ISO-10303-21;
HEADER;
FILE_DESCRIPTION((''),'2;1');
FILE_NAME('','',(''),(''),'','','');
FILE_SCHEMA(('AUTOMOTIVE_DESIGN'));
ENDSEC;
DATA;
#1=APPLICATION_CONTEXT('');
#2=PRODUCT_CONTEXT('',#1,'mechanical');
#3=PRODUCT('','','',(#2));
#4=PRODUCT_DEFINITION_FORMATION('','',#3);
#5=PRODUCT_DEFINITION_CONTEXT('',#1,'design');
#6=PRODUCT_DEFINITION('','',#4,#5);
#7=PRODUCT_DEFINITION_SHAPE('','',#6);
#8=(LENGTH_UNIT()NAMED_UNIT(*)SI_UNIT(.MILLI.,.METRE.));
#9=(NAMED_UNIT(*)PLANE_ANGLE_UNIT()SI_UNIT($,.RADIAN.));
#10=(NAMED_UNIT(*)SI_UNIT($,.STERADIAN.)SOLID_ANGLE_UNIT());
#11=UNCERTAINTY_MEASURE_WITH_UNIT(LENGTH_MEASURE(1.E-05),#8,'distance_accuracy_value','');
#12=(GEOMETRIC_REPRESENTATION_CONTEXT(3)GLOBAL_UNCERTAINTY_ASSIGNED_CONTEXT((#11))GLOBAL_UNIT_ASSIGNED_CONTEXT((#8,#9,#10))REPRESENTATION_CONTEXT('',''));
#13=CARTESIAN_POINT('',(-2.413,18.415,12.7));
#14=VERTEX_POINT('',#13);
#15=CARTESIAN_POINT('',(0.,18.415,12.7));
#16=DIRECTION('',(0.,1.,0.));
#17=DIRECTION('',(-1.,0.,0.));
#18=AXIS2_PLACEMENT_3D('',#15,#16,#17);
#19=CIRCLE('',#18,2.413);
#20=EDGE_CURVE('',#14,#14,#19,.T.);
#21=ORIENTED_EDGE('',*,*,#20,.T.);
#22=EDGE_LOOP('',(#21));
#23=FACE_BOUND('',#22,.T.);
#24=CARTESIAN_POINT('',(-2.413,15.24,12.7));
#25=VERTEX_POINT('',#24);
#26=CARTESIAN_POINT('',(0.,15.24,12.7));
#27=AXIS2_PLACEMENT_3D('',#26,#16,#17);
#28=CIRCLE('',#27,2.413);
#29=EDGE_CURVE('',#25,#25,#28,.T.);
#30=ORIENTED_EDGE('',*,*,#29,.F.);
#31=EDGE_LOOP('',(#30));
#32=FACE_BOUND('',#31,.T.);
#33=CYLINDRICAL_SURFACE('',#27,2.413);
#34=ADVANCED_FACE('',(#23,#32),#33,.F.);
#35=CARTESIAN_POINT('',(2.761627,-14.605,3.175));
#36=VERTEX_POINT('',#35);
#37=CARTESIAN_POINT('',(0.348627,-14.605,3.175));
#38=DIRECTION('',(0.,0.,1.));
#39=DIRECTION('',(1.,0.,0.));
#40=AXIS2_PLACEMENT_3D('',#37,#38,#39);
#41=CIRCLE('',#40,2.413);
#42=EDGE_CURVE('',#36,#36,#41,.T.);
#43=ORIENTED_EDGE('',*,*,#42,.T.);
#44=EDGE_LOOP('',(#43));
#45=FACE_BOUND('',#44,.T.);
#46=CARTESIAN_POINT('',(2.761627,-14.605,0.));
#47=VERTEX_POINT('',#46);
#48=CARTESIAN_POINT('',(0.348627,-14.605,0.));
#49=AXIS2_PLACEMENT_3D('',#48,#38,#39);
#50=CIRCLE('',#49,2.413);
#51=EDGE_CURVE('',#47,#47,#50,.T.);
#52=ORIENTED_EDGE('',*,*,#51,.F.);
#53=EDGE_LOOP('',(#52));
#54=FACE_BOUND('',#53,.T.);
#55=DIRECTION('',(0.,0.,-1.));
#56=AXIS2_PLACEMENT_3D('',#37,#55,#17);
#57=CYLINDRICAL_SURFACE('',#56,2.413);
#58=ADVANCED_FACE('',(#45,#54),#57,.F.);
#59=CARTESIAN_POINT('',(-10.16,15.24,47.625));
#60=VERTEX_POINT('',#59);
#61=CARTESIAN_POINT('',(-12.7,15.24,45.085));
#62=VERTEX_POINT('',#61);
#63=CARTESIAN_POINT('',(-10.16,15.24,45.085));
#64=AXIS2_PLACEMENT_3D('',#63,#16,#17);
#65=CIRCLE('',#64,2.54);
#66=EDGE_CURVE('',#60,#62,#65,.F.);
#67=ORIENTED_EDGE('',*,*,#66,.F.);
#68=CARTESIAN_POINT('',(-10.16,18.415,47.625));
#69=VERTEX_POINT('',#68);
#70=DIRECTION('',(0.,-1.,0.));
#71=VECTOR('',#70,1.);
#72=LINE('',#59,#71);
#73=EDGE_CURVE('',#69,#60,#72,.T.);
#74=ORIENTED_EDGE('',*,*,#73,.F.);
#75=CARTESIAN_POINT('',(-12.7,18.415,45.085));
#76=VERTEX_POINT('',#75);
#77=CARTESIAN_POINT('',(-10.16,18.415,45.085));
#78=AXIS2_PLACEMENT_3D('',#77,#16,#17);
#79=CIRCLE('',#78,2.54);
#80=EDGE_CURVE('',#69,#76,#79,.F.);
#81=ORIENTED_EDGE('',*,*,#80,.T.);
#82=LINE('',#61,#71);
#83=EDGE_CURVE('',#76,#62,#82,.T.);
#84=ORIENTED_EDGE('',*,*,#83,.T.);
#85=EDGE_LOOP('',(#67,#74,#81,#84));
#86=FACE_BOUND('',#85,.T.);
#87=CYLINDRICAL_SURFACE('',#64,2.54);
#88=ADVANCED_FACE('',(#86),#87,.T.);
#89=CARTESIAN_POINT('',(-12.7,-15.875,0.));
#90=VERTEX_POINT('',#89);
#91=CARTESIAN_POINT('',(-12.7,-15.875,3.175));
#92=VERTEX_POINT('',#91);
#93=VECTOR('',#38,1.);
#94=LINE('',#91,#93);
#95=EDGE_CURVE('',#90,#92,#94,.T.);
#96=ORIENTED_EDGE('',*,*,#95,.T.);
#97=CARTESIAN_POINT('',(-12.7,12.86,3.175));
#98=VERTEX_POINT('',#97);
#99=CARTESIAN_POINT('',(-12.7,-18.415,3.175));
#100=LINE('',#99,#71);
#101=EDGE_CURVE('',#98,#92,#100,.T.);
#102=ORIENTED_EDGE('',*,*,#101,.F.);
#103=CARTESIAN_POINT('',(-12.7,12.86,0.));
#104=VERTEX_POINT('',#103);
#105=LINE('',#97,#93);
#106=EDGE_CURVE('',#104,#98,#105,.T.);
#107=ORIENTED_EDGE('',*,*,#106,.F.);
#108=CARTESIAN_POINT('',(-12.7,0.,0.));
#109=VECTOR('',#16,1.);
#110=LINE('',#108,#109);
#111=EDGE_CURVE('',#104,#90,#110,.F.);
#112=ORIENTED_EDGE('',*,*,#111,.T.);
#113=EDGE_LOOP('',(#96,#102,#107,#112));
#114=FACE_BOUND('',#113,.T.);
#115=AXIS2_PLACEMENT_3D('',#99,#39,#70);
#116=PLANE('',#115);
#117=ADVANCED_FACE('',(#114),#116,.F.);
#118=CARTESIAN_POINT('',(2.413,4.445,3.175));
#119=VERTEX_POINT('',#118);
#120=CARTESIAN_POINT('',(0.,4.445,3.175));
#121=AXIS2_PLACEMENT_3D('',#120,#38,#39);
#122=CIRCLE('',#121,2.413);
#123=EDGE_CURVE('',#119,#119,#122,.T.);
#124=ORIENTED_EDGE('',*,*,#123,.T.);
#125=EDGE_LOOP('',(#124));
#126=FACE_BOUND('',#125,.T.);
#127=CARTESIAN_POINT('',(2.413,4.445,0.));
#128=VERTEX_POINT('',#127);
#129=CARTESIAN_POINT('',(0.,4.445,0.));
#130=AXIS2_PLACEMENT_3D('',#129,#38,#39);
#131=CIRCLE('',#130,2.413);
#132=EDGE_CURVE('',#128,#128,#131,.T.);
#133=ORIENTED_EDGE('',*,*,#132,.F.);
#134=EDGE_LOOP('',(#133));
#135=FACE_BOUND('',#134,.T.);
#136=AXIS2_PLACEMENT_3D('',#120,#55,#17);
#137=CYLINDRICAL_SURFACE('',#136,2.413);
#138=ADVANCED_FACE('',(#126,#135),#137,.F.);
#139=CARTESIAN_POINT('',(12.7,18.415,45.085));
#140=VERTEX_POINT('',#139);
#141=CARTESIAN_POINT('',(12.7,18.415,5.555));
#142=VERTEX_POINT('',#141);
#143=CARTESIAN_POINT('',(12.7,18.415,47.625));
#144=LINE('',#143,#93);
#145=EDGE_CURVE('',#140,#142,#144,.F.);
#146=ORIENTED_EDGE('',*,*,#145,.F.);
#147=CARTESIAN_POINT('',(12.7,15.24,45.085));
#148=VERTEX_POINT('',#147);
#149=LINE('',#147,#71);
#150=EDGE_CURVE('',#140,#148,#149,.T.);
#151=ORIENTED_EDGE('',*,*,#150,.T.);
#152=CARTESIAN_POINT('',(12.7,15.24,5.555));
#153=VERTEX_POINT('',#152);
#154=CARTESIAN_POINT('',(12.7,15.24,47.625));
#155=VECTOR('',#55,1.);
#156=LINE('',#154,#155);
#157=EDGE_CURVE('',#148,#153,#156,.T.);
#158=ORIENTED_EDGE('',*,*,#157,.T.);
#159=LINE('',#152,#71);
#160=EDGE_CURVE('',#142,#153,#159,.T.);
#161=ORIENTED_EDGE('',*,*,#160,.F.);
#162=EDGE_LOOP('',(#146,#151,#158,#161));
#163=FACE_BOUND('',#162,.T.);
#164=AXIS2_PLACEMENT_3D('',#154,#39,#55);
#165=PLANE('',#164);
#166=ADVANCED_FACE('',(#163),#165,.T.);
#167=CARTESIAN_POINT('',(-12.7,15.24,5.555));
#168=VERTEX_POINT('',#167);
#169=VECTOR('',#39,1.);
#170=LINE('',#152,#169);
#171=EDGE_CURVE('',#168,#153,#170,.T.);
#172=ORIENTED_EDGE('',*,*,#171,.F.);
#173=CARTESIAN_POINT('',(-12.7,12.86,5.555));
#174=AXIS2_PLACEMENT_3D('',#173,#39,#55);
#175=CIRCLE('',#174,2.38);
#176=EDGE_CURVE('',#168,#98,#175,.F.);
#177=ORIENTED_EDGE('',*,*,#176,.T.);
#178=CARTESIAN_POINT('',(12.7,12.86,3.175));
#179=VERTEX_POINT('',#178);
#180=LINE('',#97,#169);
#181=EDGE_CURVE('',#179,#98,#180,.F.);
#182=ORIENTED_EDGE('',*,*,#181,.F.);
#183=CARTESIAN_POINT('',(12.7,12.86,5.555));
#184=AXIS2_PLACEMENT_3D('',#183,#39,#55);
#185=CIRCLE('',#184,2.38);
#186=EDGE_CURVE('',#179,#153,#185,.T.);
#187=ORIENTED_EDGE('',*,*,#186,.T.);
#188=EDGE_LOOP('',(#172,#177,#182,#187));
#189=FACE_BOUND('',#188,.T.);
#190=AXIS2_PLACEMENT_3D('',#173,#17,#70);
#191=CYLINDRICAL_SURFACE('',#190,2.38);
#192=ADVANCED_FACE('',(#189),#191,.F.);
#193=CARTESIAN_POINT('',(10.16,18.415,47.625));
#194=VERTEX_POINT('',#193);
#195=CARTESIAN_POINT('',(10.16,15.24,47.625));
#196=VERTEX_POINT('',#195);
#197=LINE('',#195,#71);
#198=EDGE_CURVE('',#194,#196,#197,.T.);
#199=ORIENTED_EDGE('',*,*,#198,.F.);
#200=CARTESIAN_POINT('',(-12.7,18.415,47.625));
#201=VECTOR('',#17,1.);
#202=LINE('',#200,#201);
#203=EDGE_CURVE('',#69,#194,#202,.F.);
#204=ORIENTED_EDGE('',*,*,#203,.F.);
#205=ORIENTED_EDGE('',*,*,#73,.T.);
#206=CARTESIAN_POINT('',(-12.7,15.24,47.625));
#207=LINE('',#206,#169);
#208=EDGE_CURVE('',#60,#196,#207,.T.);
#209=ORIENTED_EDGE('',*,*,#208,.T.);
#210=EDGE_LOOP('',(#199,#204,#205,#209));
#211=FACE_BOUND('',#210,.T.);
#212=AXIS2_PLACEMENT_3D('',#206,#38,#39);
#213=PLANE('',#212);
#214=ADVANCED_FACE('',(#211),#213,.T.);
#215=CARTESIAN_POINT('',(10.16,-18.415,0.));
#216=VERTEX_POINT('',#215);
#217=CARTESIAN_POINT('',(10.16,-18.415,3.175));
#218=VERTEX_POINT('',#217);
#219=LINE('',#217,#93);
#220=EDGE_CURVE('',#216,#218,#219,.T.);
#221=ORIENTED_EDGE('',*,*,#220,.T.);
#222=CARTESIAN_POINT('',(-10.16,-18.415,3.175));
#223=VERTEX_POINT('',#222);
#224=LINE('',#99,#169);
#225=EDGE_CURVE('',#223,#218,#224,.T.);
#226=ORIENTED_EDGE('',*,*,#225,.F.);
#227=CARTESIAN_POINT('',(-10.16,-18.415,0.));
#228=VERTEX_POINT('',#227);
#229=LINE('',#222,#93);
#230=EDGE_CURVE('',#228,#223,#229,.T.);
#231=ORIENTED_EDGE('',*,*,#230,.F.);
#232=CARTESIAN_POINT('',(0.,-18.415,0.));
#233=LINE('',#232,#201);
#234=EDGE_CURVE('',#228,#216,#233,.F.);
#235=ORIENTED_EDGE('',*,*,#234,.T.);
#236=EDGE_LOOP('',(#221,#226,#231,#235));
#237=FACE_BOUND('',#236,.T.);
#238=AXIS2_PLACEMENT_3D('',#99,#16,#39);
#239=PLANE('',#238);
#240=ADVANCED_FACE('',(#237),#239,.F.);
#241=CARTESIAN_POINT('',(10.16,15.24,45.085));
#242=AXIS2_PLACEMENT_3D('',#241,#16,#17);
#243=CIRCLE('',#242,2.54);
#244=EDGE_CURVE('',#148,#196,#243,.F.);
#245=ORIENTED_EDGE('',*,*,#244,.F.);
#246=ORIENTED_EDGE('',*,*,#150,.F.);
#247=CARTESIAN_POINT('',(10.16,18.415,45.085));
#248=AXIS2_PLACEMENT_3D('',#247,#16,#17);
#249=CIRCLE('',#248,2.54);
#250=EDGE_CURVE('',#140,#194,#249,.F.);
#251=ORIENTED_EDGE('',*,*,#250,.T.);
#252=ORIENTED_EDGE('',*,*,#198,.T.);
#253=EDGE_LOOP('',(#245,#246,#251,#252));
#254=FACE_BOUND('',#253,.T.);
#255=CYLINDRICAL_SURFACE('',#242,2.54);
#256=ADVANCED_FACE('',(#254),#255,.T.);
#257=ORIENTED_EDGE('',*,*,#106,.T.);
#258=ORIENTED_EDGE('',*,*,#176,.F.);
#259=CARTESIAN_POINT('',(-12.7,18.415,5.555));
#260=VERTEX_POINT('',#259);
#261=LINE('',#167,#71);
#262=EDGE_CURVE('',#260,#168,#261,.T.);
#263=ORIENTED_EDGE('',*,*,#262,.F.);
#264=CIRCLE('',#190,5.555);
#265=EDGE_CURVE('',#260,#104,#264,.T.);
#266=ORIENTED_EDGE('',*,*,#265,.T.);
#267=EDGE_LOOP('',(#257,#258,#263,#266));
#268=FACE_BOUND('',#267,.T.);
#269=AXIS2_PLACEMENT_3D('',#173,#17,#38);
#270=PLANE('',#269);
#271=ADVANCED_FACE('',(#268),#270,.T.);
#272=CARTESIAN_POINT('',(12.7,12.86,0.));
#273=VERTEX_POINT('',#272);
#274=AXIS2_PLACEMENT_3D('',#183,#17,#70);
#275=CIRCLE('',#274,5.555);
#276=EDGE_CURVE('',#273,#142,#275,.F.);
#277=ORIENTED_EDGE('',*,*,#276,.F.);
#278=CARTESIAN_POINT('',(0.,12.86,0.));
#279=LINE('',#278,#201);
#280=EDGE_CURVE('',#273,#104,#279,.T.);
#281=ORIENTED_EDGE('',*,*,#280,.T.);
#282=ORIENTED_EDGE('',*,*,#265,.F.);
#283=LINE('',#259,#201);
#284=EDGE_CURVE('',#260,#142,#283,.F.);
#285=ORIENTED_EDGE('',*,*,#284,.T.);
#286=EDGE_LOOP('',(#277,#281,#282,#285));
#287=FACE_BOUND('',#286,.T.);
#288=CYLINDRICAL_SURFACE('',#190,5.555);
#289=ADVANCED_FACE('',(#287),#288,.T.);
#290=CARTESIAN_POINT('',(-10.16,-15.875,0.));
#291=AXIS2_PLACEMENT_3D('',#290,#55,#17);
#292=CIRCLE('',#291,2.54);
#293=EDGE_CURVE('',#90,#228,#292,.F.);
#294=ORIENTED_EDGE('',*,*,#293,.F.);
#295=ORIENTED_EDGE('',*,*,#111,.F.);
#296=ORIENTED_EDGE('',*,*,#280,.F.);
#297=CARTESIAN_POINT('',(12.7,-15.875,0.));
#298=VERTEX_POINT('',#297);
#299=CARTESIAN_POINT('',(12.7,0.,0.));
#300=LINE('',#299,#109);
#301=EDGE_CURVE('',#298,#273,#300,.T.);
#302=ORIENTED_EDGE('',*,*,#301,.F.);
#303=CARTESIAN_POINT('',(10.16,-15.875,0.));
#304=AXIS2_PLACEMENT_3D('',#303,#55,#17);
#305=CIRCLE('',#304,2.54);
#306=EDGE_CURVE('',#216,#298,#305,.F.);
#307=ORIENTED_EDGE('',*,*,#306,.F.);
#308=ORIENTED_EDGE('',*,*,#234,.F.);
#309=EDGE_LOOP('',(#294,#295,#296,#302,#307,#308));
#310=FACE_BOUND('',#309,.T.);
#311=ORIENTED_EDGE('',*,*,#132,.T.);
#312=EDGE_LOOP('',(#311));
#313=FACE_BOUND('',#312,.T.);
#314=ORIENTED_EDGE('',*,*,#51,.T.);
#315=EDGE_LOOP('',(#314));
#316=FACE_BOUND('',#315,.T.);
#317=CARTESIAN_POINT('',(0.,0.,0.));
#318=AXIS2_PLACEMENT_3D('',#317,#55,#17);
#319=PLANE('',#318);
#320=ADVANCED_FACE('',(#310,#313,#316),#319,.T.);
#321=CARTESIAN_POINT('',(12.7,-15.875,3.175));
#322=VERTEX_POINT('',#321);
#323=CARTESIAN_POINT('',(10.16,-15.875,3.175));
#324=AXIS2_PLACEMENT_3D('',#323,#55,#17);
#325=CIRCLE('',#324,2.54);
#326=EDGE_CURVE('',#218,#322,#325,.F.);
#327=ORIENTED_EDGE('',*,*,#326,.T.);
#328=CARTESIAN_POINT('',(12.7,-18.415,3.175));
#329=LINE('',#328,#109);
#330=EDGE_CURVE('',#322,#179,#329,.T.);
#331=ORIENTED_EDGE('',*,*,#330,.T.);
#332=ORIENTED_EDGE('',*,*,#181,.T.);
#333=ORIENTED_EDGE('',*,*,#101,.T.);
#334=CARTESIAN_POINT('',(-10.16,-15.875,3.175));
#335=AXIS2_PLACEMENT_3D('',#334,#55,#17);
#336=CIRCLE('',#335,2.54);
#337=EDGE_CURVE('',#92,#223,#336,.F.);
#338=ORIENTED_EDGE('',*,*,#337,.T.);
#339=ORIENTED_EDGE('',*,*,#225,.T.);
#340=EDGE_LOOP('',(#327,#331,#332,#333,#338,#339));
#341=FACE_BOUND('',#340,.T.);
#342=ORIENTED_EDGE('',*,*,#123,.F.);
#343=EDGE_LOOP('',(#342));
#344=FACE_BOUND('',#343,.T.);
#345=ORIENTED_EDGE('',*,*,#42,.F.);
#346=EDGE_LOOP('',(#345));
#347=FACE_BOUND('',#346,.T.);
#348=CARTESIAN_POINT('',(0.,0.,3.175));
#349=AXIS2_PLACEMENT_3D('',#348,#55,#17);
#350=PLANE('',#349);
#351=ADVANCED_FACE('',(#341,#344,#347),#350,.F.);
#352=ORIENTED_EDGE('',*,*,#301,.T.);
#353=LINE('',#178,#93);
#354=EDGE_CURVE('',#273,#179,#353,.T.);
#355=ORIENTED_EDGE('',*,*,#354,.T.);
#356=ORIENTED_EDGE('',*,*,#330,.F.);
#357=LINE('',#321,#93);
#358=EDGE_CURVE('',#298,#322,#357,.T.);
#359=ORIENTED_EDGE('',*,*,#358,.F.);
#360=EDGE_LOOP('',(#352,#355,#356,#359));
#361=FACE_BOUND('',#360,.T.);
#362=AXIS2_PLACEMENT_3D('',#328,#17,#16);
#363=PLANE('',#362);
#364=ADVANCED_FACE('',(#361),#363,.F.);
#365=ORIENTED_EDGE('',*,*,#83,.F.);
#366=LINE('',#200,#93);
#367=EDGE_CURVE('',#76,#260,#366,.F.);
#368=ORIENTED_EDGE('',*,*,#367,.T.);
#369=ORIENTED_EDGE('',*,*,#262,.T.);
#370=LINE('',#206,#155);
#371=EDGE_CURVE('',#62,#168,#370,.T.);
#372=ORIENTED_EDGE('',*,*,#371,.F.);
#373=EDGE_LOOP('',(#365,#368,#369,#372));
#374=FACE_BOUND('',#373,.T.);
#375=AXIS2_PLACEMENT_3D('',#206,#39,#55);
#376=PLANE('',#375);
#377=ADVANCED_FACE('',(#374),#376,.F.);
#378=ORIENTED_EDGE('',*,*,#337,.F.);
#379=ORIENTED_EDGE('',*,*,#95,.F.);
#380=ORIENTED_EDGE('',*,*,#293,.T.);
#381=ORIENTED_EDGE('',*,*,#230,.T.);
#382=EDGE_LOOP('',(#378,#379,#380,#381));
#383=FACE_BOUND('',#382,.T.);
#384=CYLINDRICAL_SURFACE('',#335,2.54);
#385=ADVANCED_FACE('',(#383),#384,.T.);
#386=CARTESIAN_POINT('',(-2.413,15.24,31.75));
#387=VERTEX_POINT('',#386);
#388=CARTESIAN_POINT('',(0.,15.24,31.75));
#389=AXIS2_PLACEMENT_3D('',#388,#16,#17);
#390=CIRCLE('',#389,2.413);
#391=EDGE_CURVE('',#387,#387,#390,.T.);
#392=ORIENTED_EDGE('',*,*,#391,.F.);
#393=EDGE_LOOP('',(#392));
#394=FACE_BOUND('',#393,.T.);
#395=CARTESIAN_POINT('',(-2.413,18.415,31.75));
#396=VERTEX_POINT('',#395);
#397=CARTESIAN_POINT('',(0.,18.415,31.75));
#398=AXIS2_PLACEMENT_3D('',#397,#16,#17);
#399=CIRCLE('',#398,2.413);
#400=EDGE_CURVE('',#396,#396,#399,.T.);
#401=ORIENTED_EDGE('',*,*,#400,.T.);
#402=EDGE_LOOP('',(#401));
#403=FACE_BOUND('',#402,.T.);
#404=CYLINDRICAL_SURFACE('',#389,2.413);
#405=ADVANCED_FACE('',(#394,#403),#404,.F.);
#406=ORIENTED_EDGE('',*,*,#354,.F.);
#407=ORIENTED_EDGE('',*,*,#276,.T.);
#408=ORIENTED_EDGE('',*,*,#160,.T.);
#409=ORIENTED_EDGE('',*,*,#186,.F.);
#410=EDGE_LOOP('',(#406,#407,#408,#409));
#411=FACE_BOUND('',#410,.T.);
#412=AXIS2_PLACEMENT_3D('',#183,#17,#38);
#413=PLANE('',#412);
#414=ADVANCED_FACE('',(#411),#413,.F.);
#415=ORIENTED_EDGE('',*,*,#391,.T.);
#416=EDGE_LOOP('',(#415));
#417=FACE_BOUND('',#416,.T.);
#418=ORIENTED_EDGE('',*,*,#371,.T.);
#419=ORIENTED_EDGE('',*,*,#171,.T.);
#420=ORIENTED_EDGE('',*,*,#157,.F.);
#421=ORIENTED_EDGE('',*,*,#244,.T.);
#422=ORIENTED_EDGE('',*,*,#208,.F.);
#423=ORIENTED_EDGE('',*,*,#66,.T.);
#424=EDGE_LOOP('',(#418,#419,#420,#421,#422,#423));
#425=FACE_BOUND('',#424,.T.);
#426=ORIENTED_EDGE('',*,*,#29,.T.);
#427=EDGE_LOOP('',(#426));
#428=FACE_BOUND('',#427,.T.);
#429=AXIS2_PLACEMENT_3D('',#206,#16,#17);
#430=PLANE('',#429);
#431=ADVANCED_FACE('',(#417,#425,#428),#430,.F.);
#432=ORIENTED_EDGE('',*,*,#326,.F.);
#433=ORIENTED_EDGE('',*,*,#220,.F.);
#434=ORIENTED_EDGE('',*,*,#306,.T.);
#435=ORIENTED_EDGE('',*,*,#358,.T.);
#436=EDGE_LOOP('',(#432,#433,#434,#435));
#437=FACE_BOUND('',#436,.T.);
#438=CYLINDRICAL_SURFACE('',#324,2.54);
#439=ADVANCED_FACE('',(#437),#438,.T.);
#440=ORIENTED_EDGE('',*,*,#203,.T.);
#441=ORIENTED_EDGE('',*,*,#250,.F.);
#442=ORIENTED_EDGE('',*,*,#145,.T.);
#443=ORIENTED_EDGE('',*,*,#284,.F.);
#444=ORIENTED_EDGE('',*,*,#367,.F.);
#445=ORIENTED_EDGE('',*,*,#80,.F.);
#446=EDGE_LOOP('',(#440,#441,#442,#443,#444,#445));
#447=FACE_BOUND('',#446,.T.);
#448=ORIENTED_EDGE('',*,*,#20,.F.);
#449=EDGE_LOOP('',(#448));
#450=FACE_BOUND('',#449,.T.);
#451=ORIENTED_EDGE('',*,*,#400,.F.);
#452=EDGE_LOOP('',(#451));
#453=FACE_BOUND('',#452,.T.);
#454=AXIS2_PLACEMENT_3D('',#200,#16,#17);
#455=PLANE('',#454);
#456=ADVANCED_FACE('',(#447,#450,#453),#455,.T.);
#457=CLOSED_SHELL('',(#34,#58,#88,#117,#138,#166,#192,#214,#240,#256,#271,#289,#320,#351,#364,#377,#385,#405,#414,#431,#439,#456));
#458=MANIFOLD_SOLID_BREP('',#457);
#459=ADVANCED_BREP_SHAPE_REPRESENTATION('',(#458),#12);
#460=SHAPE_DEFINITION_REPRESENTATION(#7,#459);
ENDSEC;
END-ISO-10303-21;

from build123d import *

# Parameters (mm, degrees)
SKETCH1_W              = 25.4
SKETCH1_H              = 36.83
SKETCH1_R              = 2.413
BOSS_EXTRUDE1_DEPTH    = 3.175
SKETCH2_W              = 25.4
SKETCH2_H              = 3.175
BOSS_EXTRUDE2_DEPTH    = 44.45
SKETCH3_R              = 2.413
CUT_EXTRUDE1_DEPTH     = 44.45
FILLET1_R              = 2.54
CONVERT_SOLID1_START   = -12.7
CONVERT_SOLID1_DEPTH   = 25.4
CONVERT_SOLID1_2_DEPTH = 25.4


# Read off the part's stored shape, not the designer's step: Convert-Solid1
with BuildPart() as part:
    # Sketch1 → Boss-Extrude1 (new body)
    with BuildSketch(Plane.XY):
        Rectangle(SKETCH1_W, SKETCH1_H)
        with Locations((0, 4.445)):
            Circle(SKETCH1_R, mode=Mode.SUBTRACT)
        with Locations((0.348627451, -14.605)):
            Circle(SKETCH1_R, mode=Mode.SUBTRACT)
    extrude(amount=BOSS_EXTRUDE1_DEPTH)

    # Sketch2 → Boss-Extrude2 (add)
    with BuildSketch(Plane.XY.offset(3.175)):
        with Locations((0, 16.8275)):
            Rectangle(SKETCH2_W, SKETCH2_H)
    extrude(amount=BOSS_EXTRUDE2_DEPTH)

    # Sketch3 → Cut-Extrude1 (cut)
    with BuildSketch(Plane(origin=(0, 18.415, 0), x_dir=(1, 0, 0), z_dir=(0, 1, 0))):
        with Locations(Location((0, -12.7, 0), (0, 0, 270))):
            Circle(SKETCH3_R)
        with Locations(Location((0, -31.75, 0), (0, 0, 270))):
            Circle(SKETCH3_R)
    extrude(amount=-CUT_EXTRUDE1_DEPTH, mode=Mode.SUBTRACT)

    # Fillet1
    fillet1_edges = [part.edges().sort_by_distance(p)[0] for p in [
        (-12.7, 16.8275, 47.625),
        (12.7, 16.8275, 47.625),
        (12.7, -18.415, 1.5875),
        (-12.7, -18.415, 1.5875),
    ]]
    fillet(fillet1_edges, radius=FILLET1_R)

    # Convert-Solid1 outline → Convert-Solid1 (cut)
    with BuildSketch(Plane.YZ.offset(CONVERT_SOLID1_START)):
        with BuildLine():
            Line((18.415, 0), (18.415, 5.555000066))
            ThreePointArc((18.415, 5.555000066), (16.78797815, 1.62702185), (12.859999934, 0))
            Line((12.859999934, 0), (18.415, 0))
        make_face()
    extrude(amount=CONVERT_SOLID1_DEPTH, mode=Mode.SUBTRACT)

    # Convert-Solid1 2 outline → Convert-Solid1 2 (add)
    with BuildSketch(Plane.YZ.offset(CONVERT_SOLID1_START)):
        with BuildLine():
            Line((15.24, 3.175), (15.24, 5.555000066))
            ThreePointArc((15.24, 5.555000066), (14.54291412, 3.87208588), (12.859999934, 3.175))
            Line((12.859999934, 3.175), (15.24, 3.175))
        make_face()
    extrude(amount=CONVERT_SOLID1_2_DEPTH)


solid = part.part
